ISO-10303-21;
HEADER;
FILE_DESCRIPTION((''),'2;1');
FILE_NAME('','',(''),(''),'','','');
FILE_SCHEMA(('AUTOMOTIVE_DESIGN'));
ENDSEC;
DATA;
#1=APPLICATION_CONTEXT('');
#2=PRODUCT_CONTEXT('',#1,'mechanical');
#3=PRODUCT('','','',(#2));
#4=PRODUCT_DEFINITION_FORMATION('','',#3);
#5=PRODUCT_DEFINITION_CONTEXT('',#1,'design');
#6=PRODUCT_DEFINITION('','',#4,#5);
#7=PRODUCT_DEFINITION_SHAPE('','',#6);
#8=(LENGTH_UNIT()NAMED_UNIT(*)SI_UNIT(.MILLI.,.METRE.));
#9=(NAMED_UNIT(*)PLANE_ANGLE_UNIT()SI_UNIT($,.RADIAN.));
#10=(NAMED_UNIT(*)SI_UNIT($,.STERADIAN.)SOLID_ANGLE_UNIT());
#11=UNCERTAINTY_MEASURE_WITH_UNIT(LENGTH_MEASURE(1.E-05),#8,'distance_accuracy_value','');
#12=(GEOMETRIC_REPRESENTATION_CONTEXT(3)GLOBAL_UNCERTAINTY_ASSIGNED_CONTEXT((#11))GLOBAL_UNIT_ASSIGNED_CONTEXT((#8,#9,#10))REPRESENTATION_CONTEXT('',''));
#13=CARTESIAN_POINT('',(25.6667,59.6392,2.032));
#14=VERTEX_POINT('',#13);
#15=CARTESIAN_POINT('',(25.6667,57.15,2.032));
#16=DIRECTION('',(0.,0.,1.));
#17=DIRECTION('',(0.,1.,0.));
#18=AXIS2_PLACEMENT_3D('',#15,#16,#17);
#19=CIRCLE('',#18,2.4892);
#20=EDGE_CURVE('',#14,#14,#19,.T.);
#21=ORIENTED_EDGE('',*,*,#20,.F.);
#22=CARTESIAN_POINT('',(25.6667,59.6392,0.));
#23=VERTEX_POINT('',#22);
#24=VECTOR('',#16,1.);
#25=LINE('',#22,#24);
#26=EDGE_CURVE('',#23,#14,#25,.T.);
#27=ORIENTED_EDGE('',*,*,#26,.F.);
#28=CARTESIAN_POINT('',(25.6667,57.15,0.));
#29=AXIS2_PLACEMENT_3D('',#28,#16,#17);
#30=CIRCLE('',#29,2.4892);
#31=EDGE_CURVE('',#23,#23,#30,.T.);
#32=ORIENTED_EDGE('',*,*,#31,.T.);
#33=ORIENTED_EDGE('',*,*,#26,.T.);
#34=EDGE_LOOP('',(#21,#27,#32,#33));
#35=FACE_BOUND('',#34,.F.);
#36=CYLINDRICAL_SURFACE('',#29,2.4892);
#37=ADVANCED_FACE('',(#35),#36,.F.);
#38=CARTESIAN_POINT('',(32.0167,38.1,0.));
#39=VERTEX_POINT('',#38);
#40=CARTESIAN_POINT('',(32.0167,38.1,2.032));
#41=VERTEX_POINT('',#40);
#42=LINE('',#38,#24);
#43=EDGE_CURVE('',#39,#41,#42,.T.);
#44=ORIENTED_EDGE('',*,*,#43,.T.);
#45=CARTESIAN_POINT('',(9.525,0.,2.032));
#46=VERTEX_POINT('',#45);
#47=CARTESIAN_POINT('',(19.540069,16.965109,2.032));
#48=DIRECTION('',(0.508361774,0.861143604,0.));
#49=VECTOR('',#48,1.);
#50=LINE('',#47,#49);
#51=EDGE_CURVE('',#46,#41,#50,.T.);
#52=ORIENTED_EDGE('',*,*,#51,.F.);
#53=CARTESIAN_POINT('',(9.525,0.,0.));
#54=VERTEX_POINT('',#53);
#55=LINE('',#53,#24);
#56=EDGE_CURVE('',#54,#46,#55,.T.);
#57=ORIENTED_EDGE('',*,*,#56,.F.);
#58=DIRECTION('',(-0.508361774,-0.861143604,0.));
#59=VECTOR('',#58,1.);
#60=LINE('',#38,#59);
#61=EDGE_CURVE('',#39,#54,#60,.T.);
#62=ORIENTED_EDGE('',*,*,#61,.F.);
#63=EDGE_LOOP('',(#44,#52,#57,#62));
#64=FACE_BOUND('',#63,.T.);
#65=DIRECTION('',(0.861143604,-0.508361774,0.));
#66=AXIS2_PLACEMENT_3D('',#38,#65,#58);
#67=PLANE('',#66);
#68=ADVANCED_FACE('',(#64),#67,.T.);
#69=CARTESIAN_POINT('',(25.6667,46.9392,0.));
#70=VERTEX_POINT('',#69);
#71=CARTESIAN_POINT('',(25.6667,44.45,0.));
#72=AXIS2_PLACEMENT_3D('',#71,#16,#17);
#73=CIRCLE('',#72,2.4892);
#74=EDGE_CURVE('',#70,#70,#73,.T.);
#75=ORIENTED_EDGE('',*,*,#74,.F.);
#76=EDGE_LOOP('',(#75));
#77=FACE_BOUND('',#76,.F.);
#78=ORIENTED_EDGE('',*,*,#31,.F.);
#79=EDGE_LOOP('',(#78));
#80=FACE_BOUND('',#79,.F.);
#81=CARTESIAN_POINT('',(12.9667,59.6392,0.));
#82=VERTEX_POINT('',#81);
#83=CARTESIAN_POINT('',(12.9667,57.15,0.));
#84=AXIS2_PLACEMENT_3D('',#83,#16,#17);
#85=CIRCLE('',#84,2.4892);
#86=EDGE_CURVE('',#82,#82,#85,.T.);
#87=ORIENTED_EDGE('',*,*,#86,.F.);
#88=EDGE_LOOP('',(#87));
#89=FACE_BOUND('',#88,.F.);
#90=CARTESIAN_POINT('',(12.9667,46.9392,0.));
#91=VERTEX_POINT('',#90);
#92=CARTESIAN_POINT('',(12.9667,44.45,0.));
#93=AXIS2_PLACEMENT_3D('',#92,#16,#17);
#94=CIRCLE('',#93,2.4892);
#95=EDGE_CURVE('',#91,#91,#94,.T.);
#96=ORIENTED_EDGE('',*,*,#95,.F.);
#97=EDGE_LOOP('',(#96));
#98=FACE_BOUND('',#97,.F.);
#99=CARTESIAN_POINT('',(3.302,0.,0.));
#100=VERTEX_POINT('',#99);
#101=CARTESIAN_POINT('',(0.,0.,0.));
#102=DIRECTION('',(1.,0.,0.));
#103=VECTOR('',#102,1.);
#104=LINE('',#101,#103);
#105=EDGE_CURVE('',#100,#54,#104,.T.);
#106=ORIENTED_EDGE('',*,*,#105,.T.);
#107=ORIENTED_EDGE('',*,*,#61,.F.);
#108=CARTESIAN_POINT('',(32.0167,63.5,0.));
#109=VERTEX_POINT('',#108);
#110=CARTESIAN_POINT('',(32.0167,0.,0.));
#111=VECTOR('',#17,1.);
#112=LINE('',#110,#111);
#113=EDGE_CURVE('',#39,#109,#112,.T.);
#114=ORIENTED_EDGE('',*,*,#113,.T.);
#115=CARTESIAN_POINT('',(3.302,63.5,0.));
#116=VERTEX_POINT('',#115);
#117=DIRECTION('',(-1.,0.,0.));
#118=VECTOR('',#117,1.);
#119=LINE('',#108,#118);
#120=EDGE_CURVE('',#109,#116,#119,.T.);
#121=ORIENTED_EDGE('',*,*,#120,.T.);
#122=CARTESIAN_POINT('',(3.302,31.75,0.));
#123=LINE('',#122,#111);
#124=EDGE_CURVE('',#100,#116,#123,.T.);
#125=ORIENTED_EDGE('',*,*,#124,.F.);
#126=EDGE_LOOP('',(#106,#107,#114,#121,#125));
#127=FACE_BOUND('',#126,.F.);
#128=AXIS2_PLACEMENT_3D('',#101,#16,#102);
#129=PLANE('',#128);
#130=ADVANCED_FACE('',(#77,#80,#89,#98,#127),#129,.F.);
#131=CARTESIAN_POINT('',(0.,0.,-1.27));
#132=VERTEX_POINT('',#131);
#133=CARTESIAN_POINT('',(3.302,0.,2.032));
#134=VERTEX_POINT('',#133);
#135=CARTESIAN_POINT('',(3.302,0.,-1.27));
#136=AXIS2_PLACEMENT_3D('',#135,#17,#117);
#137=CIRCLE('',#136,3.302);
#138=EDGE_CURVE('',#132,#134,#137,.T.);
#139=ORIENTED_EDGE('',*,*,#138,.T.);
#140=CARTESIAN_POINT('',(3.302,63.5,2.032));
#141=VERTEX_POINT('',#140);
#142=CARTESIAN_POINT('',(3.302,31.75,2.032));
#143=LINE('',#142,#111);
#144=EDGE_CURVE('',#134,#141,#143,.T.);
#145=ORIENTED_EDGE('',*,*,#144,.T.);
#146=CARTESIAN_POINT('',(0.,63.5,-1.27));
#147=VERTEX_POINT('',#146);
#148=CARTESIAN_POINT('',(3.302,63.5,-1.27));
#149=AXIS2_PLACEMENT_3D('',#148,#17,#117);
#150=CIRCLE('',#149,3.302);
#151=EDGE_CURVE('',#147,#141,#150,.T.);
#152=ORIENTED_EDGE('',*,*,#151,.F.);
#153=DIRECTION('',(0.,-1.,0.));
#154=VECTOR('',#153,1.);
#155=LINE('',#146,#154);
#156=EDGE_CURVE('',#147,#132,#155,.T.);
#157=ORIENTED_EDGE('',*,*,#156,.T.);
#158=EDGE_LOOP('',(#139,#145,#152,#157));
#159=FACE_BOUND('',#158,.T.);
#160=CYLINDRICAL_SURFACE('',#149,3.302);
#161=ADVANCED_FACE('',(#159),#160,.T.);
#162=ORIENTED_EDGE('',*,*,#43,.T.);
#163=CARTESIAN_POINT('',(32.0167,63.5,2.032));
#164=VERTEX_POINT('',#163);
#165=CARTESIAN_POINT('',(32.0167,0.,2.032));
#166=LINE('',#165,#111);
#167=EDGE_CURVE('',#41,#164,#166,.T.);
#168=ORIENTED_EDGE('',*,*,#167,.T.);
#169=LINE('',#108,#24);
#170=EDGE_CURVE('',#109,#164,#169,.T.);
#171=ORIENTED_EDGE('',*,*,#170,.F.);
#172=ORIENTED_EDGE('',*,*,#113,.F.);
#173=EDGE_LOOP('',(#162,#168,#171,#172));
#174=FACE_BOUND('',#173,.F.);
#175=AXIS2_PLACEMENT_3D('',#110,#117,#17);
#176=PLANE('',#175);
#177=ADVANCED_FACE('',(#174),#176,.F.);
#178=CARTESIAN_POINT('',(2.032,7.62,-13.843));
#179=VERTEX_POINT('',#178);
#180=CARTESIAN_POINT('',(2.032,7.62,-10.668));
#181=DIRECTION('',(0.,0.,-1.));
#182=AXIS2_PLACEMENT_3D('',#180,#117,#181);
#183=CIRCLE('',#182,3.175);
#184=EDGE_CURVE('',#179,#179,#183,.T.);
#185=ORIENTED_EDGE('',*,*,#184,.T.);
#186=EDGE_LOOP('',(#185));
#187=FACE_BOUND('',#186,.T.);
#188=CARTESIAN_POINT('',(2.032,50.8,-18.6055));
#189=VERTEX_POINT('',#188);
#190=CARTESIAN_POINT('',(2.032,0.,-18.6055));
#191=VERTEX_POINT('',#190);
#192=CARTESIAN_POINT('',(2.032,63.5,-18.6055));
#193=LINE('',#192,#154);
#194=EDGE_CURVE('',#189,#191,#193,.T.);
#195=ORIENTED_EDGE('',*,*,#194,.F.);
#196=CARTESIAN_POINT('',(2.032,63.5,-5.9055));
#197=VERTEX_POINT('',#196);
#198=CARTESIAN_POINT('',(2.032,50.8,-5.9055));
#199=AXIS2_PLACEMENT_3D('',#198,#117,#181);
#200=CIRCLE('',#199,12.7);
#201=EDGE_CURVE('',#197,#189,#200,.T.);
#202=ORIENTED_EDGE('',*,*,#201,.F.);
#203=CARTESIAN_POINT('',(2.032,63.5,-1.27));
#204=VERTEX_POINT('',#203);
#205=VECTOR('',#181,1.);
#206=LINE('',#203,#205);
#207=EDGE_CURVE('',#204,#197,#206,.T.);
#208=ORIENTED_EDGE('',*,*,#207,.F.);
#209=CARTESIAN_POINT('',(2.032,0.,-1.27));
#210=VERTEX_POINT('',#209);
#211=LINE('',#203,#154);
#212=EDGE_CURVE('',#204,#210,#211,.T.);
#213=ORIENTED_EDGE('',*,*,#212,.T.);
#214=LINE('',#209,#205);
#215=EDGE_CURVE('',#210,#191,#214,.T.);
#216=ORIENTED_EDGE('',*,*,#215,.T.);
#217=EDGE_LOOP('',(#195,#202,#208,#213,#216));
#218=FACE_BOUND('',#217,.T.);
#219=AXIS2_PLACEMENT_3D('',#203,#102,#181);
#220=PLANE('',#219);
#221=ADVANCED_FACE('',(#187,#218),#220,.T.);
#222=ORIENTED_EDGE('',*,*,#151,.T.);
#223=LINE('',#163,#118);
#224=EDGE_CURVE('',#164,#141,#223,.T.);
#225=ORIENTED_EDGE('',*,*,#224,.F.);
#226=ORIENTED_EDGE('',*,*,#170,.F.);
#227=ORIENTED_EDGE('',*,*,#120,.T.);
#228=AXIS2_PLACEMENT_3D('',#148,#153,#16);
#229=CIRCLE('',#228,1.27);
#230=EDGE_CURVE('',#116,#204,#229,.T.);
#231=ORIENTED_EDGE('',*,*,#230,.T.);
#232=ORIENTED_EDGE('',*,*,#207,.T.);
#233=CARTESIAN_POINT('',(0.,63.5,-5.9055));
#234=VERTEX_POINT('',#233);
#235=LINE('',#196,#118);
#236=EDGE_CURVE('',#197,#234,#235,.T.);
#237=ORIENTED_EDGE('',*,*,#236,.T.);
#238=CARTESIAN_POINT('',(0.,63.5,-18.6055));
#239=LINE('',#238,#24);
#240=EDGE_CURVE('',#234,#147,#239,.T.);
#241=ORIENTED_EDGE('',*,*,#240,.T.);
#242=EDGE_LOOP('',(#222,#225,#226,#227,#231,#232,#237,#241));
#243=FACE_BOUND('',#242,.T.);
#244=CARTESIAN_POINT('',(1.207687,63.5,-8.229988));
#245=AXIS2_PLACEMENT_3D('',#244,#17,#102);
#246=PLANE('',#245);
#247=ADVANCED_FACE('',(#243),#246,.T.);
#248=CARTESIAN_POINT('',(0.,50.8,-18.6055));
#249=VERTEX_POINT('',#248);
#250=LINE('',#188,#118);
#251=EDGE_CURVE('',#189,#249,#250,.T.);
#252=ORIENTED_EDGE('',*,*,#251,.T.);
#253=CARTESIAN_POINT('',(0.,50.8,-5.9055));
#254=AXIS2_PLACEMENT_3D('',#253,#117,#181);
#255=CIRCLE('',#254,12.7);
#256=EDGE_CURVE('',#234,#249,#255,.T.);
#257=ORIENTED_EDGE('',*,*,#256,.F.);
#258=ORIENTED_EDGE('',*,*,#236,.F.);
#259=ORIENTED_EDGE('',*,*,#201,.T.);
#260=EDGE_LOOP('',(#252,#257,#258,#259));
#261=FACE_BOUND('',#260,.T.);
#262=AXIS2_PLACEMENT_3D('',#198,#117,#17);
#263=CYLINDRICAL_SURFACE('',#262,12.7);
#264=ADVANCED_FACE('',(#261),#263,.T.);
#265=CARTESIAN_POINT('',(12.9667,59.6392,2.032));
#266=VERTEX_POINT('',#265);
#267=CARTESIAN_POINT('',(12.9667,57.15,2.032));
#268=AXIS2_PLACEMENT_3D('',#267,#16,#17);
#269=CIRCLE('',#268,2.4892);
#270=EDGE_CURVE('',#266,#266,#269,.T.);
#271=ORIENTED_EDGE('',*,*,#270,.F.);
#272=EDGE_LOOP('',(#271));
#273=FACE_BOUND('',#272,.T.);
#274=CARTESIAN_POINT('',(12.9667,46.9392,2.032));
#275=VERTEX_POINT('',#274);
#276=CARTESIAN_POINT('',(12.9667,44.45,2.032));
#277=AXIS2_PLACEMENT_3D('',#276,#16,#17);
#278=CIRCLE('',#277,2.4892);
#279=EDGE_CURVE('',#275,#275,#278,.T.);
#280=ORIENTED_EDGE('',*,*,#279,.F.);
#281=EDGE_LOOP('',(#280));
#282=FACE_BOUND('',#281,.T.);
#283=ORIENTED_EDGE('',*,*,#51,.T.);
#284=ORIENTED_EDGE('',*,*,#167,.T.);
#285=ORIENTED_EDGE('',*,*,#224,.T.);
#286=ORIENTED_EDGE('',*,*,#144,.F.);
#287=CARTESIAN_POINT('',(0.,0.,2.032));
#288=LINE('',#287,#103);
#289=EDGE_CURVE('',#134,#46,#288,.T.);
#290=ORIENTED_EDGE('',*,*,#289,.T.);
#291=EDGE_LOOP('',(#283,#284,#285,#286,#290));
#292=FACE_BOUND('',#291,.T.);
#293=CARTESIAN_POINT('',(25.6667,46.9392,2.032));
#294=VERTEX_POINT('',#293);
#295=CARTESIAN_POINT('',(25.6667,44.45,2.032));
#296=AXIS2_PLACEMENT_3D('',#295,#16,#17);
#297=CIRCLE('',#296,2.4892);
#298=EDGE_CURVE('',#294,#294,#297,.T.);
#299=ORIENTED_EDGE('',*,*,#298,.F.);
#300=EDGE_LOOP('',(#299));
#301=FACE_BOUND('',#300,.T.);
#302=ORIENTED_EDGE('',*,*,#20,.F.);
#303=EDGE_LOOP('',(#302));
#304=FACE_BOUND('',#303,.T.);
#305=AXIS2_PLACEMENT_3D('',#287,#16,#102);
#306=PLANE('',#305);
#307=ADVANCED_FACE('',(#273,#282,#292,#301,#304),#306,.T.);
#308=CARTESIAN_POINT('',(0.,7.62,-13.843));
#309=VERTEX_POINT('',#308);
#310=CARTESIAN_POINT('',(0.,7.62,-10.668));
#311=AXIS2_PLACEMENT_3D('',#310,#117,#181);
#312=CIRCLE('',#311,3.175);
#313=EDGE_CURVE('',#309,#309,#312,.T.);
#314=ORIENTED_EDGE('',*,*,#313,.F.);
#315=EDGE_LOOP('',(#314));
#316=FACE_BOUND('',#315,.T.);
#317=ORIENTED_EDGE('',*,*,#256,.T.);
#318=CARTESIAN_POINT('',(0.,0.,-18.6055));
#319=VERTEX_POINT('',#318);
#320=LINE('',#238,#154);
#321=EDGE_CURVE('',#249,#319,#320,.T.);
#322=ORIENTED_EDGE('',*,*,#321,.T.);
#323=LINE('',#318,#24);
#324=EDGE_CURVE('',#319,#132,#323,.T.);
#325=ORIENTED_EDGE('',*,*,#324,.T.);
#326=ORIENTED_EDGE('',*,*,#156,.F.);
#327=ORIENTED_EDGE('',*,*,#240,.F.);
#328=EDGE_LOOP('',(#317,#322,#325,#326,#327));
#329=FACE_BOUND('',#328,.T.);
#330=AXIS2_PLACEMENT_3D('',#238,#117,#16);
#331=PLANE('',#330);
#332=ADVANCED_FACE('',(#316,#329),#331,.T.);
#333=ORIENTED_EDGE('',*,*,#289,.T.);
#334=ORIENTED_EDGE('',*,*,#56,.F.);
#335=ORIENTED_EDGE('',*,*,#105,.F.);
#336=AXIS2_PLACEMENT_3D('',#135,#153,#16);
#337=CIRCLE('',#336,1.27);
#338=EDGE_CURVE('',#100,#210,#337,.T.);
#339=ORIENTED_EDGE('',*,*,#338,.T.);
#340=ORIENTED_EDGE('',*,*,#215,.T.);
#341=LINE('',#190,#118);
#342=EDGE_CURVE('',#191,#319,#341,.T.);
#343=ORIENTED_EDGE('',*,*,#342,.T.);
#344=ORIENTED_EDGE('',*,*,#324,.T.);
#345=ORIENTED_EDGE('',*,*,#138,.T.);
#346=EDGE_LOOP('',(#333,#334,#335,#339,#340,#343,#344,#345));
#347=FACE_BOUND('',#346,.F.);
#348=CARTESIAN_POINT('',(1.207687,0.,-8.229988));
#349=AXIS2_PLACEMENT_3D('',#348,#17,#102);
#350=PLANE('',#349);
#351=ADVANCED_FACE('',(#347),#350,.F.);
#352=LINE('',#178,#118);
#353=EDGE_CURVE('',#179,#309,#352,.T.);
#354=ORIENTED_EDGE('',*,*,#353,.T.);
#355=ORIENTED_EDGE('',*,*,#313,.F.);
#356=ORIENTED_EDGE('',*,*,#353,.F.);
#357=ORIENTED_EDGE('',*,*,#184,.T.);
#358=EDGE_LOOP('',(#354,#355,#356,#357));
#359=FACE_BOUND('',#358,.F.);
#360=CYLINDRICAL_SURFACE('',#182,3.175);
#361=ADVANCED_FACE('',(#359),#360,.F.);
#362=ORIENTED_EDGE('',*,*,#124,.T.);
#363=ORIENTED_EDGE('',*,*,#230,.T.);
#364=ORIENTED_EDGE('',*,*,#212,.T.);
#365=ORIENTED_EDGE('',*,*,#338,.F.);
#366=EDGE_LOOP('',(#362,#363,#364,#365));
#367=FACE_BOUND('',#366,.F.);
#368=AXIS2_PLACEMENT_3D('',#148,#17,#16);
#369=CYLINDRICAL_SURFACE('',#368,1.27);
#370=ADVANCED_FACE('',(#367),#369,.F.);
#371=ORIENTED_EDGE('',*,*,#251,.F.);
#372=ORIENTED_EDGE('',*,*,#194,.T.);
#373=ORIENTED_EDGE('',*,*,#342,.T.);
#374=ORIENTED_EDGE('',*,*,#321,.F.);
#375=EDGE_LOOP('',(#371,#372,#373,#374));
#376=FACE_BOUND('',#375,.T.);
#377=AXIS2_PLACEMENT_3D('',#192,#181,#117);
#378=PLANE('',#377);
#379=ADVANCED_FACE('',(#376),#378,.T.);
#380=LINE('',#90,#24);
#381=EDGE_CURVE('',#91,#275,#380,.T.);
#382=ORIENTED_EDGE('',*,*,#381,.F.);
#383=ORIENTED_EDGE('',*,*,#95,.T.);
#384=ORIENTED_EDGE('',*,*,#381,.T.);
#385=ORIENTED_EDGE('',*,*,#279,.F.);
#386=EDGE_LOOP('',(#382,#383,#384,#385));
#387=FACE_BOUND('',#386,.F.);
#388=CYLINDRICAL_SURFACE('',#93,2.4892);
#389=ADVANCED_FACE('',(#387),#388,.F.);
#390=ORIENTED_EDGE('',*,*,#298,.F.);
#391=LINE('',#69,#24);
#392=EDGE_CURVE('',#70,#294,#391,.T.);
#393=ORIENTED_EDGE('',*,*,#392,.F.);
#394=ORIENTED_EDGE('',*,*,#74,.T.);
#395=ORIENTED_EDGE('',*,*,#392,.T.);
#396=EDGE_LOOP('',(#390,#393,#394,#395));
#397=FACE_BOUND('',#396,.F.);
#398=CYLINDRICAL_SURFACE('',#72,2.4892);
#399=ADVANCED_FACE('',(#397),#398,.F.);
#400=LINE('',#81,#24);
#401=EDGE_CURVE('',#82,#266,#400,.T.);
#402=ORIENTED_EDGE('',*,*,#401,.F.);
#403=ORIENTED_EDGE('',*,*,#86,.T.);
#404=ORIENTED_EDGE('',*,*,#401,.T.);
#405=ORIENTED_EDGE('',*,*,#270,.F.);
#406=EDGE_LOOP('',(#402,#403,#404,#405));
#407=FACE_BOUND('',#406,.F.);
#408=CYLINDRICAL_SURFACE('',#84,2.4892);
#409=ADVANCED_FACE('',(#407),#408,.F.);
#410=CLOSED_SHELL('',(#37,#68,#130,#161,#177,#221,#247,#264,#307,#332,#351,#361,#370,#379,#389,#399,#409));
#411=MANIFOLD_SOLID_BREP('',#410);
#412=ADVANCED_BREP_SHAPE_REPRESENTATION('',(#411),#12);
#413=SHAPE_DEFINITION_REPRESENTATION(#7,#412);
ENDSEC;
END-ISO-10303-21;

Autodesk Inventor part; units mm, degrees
ref_plane "YZ Plane" through (0, 0, 0) normal (1, 0, 0) x (0, 1, 0)
ref_plane "XZ Plane" through (0, 0, 0) normal (0, 1, 0) x (-1, 0, 0)
ref_plane "XY Plane" through (0, 0, 0) normal (0, 0, 1) x (1, 0, 0)
sketch "Sketch1" plane through (0, 0, 0) normal (0, 0, 1) x (1, 0, 0)
  line L0 (0, 0) -> (32.0167, 0)
  line L1 (32.0167, 0) -> (32.0167, 63.5)
  line L2 (32.0167, 63.5) -> (0, 63.5)
  line L3 (0, 63.5) -> (0, 0)
  dimension "d0" = 63.5
  dimension "d1" = 32.0167
extrude "Plate1" add sketch "Sketch1" along normal blind 2.032
sketch "Sketch2" plane through (2.032, 63.5, 2.032) normal (-1, 0, 0) x (0, -1, 0)
  line L0 (63.5, 0) -> (0, 0)
  line L1 (0, 0) -> (0, -20.6375)
  line L2 (0, -20.6375) -> (63.5, -20.6375)
  line L3 (63.5, -20.6375) -> (63.5, 0)
edge flange "Flange1" height 20.6375 angle 90 thickness 2.032 bend radius 1.27 thickness toward (-1, 0, 0) relief tear relief width 2.032 relief depth 1.016 edges at (0, 31.75, 0) wall of the first edge with corners at (2.032, 0, 2.032) (2.032, 63.5, 2.032) (2.032, 63.5, -18.6055) (2.032, 0, -18.6055)
bend "Bend1"
corner "Corner1"
sketch "Sketch3" plane through (0, 0, 0) normal (0, 0, -1) x (-1, 0, 0)
  line L0 (-32.0167, 0) -> (-32.0167, 63.5) projected
  line L1 (-32.0167, 63.5) -> (-3.302, 63.5) projected
  point P0 (0, 0)
  point P1 (-25.6667, 57.15)
  point P2 (-12.9667, 57.15)
  point P3 (-25.6667, 44.45)
  point P4 (-12.9667, 44.45)
  dimension "d13" = 6.35
  dimension "d14" = 6.35
  dimension "d15" = 12.7
  dimension "d16" = 12.7
hole "Hole1" at (25.6667, 57.15, 0) at (12.9667, 57.15, 0) at (25.6667, 44.45, 0) at (12.9667, 44.45, 0) direction (0, 0, 1) diameter 4.9784 end through all
sketch "Sketch4" plane through (2.032, 0, -18.6055) normal (1, 0, 0) x (0, 0, -1)
  line L0 (-20.6375, 63.5) -> (-20.6375, 0) projected
  line L1 (-17.3355, 0) -> (0, 0) projected
  point P0 (-18.6055, 0)
  point P1 (-7.9375, 7.62)
  dimension "d31" = 12.7
  dimension "d32" = 7.62
hole "Hole2" at (2.032, 7.62, -10.668) direction (-1, 0, 0) diameter 6.35 end through all clearance for "Flat Head Machine Screw (82)" size "1/4" standard "Ansi Unified Screw Threads"
fillet "Fillet1" radius 12.7 1 edges at (1.016, 63.5, -18.6055)
sketch "Sketch5" plane through (0, 0, 0) normal (0, 0, -1) x (-1, 0, 0)
  line L0 (-32.0167, 38.1) -> (-9.525, 0)
  line L1 (-32.0167, 0) -> (-3.302, 0) projected
  line L2 (0, 0) -> (0, 50.8) projected
  line L3 (-32.0167, 63.5) -> (-3.302, 63.5) projected
  line L4 (-32.0167, 0) -> (-32.0167, 63.5) projected
  line L5 (-32.0167, 38.1) -> (-32.0167, 0)
  line L6 (-32.0167, 0) -> (-9.525, 0)
  dimension "d34" = 9.525
  dimension "d35" = 25.4
extrude "Extrusion1" cut sketch "Sketch5" against normal through all
equation "\"d22\" = Thickness"
equation "\"d29\" = Thickness"
equation "\"d2\" = Thickness"
equation "\"d3\" = BendReliefWidth"
equation "\"d4\" = BendReliefDepth"
equation "\"d5\" = MinimumRemnant"
equation "\"d6\" = TransitionRadius"
equation "\"d9\" = BendRadius"
equation "\"d10\" = CornerReliefSize"
equation "\"d11\" = GapSize"
equation "\"d12\" = JacobiRadiusSize"
equation "\"BendReliefWidth\" = Thickness"
equation "\"BendReliefDepth\" = 0.5 * Thickness"
equation "\"CornerReliefSize\" = 4 * Thickness"
equation "\"MinimumRemnant\" = 2 * Thickness"
equation "\"TransitionRadius\" = BendRadius"
equation "\"JacobiRadiusSize\" = BendRadius"
equation "\"GapSize\" = Thickness"
equation "\"Thickness\" = 2.032"
equation "\"BendRadius\" = 1.27"
properties part number "Roller bracket" material "Aluminum 6061"
